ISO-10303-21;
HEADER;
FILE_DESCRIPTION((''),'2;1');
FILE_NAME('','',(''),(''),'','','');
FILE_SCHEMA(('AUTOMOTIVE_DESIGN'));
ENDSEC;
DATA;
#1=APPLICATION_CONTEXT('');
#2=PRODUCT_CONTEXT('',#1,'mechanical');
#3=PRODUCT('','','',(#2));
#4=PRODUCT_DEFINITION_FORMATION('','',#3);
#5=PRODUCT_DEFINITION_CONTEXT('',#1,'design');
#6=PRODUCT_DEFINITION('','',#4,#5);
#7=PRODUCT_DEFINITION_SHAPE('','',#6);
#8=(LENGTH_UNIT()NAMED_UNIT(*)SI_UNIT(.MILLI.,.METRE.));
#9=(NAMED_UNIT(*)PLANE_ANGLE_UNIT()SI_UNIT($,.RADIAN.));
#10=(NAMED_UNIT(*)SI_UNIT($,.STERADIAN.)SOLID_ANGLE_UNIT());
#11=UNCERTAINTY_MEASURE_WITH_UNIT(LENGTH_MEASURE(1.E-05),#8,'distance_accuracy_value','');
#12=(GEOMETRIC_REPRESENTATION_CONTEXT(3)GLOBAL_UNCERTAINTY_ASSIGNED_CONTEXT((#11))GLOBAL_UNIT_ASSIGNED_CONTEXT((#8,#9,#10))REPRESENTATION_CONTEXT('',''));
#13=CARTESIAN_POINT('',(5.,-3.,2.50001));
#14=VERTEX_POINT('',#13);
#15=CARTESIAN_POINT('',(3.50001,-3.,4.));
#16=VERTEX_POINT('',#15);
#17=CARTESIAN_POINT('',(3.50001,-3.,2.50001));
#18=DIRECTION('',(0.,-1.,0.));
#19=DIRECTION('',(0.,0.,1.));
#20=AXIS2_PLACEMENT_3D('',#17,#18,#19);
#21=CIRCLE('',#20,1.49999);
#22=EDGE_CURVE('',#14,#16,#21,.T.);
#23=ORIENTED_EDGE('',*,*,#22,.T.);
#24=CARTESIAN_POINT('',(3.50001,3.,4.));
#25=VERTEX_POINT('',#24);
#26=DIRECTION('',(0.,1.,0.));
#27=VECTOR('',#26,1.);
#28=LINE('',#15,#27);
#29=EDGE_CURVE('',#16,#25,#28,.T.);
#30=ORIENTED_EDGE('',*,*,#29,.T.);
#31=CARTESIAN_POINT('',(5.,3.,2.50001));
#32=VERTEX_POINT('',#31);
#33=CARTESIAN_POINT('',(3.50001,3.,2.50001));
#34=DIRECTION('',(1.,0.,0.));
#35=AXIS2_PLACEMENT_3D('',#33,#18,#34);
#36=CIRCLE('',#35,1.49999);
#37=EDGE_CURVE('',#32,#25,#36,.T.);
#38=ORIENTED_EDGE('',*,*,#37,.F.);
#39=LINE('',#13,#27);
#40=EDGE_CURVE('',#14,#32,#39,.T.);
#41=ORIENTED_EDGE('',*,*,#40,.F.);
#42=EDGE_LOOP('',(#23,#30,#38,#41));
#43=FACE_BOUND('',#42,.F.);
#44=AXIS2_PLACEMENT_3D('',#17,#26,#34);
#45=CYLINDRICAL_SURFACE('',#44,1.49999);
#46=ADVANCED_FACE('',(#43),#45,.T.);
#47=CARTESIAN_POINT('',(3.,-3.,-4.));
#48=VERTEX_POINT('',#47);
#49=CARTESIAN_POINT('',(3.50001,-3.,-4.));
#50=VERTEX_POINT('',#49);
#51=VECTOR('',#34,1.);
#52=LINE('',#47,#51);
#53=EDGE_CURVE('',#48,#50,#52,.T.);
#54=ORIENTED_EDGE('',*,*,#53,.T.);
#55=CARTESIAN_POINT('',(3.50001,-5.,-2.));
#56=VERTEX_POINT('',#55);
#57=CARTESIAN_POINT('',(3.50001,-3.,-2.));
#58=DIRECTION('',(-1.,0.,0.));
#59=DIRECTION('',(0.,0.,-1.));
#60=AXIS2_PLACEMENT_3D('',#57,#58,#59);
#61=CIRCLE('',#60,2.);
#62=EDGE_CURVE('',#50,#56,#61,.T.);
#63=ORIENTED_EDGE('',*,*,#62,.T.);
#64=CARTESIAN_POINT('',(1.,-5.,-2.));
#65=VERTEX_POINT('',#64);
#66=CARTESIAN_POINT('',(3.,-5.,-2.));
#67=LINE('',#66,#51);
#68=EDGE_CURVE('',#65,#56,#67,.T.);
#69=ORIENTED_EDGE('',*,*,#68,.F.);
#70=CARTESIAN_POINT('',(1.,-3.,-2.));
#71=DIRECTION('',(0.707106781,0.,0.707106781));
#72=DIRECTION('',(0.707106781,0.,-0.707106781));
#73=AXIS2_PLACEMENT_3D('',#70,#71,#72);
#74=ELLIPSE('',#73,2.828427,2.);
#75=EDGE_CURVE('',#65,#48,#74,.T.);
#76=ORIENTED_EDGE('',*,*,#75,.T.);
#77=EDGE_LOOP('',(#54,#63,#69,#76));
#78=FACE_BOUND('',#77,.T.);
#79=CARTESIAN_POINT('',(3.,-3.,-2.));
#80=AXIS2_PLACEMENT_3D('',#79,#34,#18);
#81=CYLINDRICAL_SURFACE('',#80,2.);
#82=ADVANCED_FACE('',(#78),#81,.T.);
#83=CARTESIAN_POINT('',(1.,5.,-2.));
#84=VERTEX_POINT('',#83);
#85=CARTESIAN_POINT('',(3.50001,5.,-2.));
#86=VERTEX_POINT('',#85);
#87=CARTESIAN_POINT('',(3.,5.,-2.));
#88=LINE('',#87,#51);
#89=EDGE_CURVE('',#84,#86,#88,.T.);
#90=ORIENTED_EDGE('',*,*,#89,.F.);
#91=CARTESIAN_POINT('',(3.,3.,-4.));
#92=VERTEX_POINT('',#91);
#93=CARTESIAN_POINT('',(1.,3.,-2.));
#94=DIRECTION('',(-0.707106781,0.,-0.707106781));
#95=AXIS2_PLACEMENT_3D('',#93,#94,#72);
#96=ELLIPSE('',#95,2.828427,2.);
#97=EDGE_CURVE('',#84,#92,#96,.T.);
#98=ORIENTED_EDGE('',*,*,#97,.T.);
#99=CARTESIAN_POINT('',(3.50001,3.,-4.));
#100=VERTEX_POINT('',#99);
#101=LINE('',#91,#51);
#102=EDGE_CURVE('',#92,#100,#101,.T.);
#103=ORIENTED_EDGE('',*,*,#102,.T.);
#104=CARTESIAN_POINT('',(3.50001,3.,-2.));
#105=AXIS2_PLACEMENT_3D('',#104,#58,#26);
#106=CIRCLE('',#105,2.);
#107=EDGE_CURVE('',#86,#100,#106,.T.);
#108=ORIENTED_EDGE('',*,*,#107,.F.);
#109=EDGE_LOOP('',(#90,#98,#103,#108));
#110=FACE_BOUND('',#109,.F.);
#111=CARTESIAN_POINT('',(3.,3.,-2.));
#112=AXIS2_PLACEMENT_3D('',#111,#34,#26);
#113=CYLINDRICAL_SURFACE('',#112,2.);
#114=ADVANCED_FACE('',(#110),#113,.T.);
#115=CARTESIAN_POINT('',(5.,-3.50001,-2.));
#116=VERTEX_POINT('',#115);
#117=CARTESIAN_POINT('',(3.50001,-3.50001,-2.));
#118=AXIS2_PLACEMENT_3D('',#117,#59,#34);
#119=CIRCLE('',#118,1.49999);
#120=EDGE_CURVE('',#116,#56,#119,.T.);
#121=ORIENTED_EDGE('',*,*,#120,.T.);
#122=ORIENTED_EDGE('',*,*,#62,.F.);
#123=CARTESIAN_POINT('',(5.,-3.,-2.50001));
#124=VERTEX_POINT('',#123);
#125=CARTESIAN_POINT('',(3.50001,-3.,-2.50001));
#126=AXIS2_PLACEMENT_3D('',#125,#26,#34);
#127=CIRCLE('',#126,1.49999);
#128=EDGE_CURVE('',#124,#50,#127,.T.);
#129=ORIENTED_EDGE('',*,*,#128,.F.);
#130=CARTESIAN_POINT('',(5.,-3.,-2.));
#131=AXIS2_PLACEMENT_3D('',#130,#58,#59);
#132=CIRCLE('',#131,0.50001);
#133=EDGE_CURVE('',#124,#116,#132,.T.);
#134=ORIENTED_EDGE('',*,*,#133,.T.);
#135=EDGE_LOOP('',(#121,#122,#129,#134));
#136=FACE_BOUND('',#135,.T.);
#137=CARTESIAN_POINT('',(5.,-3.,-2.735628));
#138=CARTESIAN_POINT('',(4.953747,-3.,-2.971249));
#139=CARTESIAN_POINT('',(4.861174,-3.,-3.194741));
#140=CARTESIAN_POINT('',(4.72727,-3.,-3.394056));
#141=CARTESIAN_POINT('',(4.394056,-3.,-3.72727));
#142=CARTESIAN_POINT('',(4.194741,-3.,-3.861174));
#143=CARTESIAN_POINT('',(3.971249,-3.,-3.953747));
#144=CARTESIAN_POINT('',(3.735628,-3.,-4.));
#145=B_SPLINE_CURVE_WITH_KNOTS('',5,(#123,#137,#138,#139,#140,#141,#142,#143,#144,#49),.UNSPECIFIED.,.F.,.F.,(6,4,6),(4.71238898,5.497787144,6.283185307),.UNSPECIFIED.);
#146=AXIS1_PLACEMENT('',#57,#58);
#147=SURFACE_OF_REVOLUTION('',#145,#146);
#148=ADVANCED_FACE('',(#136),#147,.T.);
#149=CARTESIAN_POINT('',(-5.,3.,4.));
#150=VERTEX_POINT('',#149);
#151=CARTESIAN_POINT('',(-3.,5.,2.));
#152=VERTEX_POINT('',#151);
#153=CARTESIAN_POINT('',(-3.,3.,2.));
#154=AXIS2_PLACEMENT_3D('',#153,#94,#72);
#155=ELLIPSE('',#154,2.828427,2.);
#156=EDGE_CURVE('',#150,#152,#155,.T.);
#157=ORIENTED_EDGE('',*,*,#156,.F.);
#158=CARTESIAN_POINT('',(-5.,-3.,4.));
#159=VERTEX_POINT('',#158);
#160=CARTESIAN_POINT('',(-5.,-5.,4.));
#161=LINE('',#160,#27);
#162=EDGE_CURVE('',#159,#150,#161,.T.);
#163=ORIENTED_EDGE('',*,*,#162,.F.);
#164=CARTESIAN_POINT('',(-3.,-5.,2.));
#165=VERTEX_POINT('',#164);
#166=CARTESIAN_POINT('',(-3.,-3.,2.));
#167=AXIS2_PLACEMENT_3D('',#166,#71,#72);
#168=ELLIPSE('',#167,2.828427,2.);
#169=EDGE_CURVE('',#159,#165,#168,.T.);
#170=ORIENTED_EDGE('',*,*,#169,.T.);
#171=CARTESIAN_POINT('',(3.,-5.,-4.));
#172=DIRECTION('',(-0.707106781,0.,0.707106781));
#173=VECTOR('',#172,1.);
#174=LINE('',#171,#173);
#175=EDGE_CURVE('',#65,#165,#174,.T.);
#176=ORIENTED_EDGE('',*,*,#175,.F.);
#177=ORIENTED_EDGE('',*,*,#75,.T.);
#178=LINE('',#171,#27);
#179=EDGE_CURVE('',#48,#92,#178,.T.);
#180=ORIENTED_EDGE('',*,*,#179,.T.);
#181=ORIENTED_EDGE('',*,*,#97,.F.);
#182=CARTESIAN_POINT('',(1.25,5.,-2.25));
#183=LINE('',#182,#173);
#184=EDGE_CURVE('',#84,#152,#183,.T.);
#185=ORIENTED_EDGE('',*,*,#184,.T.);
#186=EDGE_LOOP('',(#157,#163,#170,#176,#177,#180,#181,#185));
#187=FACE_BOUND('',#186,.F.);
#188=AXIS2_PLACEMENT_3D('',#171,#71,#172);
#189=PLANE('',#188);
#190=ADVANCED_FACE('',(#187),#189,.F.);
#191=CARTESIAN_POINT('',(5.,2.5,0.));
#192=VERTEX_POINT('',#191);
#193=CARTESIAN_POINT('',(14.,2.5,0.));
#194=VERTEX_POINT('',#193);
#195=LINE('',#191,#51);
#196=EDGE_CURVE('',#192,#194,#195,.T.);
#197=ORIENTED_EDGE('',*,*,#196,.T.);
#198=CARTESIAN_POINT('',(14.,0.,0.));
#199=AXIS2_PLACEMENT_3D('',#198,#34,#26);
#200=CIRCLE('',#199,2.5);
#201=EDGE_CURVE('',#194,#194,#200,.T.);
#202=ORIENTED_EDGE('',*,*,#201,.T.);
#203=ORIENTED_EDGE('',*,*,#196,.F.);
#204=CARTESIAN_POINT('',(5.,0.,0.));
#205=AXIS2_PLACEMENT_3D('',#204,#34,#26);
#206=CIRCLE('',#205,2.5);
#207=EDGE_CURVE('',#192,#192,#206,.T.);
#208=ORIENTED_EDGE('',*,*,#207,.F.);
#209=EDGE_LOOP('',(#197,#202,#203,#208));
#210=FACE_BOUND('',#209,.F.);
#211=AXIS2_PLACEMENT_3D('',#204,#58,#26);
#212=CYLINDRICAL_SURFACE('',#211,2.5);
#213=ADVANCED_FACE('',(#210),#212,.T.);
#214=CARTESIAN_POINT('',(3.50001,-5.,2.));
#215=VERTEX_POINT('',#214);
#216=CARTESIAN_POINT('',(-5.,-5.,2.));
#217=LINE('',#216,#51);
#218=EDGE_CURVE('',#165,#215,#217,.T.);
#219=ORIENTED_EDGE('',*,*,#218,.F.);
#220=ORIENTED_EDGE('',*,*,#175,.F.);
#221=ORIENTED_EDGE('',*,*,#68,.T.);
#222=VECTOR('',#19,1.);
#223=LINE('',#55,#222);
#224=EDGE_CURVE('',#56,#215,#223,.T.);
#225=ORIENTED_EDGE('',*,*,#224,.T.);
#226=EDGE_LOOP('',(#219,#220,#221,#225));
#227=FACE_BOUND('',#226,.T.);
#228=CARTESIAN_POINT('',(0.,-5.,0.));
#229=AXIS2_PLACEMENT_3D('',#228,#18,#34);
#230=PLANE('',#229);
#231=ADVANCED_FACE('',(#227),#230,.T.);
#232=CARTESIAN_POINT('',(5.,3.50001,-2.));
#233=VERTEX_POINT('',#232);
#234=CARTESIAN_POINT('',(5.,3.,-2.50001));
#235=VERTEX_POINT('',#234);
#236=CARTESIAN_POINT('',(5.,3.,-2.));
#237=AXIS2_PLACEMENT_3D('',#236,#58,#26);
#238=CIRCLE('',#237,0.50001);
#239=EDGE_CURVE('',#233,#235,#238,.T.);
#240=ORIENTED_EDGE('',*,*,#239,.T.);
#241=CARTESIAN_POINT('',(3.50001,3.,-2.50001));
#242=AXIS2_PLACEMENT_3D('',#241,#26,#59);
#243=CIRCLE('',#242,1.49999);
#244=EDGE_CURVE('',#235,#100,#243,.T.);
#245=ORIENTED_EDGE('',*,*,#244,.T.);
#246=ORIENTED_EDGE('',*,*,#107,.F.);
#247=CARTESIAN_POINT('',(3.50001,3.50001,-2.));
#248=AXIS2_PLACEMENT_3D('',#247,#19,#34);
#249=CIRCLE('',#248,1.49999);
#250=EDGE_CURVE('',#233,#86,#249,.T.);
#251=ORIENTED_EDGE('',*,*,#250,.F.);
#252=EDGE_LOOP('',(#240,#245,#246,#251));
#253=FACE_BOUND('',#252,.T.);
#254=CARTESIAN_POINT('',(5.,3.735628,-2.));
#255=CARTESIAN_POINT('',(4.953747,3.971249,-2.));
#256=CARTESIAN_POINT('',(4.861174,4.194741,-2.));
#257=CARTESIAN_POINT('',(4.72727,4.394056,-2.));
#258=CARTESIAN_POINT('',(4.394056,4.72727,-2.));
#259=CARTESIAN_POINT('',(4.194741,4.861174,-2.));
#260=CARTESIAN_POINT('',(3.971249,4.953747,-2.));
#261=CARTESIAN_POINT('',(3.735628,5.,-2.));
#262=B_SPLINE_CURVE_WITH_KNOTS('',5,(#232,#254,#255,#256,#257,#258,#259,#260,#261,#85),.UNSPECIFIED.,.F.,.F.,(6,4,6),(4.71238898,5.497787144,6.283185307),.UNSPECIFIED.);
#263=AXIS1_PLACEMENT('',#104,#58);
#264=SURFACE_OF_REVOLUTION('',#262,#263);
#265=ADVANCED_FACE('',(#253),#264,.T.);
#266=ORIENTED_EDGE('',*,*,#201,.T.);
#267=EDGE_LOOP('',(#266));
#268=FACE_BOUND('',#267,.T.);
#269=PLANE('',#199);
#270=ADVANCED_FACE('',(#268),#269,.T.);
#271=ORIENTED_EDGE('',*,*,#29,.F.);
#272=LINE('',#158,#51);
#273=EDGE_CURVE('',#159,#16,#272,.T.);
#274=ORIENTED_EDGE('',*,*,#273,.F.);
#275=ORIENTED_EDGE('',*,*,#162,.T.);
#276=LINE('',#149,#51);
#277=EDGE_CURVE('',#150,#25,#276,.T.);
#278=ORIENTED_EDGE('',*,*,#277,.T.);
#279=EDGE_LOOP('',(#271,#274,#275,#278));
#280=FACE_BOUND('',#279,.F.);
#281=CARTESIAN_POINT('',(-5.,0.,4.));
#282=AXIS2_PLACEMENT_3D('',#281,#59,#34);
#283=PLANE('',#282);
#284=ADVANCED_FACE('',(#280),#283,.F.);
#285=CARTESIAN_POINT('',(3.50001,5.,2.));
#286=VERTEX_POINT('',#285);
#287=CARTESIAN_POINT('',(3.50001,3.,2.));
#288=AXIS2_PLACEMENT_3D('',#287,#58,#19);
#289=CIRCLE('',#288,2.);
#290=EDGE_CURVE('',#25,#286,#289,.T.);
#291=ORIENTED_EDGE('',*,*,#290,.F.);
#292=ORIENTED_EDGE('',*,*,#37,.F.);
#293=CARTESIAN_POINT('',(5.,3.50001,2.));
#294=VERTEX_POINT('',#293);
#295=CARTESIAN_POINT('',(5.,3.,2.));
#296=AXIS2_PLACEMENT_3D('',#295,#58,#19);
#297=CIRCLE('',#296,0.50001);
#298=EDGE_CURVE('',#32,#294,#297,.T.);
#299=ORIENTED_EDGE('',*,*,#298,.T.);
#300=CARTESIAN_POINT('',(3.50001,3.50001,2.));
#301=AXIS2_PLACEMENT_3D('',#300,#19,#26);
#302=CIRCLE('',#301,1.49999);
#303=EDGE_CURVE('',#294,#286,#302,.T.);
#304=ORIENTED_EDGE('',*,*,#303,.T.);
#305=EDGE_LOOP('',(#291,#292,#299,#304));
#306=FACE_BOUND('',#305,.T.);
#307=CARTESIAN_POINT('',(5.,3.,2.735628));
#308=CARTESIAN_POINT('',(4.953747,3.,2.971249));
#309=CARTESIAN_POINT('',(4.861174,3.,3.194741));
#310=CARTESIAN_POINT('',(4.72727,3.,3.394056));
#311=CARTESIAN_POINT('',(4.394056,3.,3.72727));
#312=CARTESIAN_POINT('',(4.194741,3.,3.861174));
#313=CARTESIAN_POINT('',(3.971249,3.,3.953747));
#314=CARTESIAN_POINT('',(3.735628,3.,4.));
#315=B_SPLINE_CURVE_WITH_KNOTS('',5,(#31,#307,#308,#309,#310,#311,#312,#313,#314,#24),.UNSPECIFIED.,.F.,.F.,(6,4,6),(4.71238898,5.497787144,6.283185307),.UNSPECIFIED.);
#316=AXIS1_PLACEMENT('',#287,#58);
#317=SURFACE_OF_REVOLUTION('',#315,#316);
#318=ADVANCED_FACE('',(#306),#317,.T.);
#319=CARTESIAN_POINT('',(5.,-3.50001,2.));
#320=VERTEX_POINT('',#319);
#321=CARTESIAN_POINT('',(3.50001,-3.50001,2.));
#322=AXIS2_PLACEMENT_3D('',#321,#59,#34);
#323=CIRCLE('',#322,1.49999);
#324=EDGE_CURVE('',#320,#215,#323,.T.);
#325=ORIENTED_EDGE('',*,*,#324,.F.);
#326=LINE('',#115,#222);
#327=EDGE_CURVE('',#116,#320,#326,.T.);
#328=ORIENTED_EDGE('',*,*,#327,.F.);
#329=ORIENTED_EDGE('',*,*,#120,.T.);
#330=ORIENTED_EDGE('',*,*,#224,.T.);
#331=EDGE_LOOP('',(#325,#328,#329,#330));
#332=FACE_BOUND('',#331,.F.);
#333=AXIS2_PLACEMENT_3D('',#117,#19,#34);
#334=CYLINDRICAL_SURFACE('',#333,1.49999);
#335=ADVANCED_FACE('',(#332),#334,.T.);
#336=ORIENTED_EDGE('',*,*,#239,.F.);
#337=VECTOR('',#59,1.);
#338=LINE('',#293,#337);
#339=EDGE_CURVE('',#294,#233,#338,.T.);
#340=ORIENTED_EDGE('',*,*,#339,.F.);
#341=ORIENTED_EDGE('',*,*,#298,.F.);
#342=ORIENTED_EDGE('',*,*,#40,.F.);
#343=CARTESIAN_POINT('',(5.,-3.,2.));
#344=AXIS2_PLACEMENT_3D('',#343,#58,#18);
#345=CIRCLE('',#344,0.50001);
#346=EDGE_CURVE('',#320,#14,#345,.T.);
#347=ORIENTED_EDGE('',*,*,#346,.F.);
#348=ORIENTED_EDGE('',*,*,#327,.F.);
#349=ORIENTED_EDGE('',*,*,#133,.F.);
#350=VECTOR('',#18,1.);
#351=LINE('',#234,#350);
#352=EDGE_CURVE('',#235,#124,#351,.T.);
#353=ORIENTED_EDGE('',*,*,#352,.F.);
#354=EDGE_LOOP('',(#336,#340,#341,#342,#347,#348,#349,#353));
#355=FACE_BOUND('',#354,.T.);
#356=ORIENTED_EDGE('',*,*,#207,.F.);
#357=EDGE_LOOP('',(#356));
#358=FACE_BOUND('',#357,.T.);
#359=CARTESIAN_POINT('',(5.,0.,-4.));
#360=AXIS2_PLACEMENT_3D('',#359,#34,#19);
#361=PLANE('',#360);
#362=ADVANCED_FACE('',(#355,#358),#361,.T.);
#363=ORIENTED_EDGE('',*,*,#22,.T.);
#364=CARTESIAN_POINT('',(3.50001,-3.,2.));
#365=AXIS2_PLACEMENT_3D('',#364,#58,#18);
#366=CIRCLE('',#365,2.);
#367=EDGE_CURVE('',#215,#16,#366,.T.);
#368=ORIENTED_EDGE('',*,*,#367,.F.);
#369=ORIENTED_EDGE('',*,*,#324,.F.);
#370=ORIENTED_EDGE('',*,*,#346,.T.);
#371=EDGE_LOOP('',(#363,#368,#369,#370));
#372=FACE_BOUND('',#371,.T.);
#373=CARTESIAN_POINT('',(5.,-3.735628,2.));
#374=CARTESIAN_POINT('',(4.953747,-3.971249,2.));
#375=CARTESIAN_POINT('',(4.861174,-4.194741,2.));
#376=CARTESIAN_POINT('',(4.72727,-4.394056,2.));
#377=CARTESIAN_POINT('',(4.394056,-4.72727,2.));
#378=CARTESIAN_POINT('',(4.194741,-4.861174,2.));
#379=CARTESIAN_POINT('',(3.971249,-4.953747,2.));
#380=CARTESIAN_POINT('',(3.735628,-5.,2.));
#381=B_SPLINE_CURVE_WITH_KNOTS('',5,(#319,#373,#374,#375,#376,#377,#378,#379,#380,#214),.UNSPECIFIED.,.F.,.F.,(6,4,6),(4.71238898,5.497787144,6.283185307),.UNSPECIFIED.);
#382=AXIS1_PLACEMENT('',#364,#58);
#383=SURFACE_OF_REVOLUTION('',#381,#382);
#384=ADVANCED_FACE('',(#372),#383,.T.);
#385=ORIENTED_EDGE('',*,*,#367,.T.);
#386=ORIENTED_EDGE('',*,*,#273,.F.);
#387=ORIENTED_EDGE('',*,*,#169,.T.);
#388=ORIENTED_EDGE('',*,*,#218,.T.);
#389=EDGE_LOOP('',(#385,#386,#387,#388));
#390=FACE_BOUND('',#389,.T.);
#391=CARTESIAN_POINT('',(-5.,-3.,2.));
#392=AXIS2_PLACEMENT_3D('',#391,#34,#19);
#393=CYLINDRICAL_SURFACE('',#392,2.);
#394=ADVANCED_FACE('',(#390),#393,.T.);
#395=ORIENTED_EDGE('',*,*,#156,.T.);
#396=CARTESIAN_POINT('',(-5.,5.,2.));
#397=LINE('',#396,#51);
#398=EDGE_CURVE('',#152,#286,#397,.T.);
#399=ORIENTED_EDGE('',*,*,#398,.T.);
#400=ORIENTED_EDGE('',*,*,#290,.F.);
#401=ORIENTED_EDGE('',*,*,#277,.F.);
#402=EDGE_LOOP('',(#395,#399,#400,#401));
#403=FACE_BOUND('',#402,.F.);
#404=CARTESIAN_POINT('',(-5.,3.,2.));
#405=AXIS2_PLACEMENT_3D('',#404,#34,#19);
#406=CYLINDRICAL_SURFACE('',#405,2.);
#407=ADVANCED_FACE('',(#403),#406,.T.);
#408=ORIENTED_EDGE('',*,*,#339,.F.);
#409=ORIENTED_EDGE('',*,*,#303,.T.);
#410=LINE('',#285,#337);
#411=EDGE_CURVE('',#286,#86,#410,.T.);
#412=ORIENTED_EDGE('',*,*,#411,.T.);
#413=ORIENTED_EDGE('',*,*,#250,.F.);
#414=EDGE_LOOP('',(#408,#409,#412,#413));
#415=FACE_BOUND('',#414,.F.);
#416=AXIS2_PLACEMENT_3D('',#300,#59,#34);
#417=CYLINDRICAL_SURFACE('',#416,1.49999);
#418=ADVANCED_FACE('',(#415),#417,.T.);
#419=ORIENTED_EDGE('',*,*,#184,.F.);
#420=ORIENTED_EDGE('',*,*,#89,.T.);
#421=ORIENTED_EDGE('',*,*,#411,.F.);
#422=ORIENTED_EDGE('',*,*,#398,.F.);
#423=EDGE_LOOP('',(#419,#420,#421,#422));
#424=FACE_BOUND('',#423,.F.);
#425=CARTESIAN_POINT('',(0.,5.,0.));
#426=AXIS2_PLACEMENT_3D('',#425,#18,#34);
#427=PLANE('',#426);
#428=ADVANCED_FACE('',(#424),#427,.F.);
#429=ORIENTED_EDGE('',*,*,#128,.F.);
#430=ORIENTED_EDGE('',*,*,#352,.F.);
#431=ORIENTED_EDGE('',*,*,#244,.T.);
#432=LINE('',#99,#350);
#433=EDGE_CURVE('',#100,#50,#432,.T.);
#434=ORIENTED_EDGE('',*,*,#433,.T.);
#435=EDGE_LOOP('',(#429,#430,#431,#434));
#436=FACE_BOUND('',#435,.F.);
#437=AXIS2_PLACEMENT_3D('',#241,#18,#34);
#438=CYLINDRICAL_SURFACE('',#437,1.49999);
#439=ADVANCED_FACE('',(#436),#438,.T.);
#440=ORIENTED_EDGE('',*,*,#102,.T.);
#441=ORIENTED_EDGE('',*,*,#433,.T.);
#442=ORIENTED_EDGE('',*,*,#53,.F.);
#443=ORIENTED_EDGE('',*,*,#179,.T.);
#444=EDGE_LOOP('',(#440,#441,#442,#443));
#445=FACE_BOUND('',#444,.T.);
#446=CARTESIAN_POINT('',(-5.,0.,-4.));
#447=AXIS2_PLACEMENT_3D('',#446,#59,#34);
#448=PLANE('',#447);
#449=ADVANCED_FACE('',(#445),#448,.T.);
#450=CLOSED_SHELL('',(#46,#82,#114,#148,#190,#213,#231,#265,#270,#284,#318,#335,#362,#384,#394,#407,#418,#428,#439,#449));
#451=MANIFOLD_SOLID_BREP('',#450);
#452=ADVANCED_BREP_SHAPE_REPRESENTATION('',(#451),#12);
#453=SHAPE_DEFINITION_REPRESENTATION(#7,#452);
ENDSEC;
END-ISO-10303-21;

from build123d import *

# Parameters (mm, degrees)
F0_W     = 10
F0_H     = 8
F1_DEPTH = 5
F3_DEPTH = 10.001
F4_R     = 2.5
F5_DEPTH = 9
F6_R     = 2
F7_R     = 1.49999


# Not quite as in the source:
# - a fillet or chamfer is up to 0.001 mm smaller than in the source, because OpenCascade refuses the exact size


with BuildPart() as f1:
    # F0 (on Front) → F1 (new body, symmetric)
    with BuildSketch(Plane.XZ):
        Rectangle(F0_W, F0_H)
    extrude(amount=F1_DEPTH, both=True)

    # F2 (on face) → F3 (cut, through all)
    with BuildSketch(Plane.XZ.offset(5)):
        Polygon((3, -4), (-5, 4), (-5, -4), align=None)
    extrude(amount=-F3_DEPTH, mode=Mode.SUBTRACT)

    # F4 (on face) → F5 (join)
    with BuildSketch(Plane.YZ.offset(5)):
        Circle(F4_R)
    extrude(amount=F5_DEPTH)

    # F6
    f6_edges = [f1.edges().sort_by_distance(p)[0] for p in [
        (0, -5, 4),
        (0, 5, 4),
        (4, -5, -4),
        (4, 5, -4),
    ]]
    fillet(f6_edges, radius=F6_R)

    # F7 (radius 1.5 in the source; OpenCascade refuses exactly that, so slightly less here)
    f7_edges = [f1.edges().sort_by_distance(p)[0] for p in [
        (5, -5, 0),
    ]]
    fillet(f7_edges, radius=F7_R)


solid = f1.part
